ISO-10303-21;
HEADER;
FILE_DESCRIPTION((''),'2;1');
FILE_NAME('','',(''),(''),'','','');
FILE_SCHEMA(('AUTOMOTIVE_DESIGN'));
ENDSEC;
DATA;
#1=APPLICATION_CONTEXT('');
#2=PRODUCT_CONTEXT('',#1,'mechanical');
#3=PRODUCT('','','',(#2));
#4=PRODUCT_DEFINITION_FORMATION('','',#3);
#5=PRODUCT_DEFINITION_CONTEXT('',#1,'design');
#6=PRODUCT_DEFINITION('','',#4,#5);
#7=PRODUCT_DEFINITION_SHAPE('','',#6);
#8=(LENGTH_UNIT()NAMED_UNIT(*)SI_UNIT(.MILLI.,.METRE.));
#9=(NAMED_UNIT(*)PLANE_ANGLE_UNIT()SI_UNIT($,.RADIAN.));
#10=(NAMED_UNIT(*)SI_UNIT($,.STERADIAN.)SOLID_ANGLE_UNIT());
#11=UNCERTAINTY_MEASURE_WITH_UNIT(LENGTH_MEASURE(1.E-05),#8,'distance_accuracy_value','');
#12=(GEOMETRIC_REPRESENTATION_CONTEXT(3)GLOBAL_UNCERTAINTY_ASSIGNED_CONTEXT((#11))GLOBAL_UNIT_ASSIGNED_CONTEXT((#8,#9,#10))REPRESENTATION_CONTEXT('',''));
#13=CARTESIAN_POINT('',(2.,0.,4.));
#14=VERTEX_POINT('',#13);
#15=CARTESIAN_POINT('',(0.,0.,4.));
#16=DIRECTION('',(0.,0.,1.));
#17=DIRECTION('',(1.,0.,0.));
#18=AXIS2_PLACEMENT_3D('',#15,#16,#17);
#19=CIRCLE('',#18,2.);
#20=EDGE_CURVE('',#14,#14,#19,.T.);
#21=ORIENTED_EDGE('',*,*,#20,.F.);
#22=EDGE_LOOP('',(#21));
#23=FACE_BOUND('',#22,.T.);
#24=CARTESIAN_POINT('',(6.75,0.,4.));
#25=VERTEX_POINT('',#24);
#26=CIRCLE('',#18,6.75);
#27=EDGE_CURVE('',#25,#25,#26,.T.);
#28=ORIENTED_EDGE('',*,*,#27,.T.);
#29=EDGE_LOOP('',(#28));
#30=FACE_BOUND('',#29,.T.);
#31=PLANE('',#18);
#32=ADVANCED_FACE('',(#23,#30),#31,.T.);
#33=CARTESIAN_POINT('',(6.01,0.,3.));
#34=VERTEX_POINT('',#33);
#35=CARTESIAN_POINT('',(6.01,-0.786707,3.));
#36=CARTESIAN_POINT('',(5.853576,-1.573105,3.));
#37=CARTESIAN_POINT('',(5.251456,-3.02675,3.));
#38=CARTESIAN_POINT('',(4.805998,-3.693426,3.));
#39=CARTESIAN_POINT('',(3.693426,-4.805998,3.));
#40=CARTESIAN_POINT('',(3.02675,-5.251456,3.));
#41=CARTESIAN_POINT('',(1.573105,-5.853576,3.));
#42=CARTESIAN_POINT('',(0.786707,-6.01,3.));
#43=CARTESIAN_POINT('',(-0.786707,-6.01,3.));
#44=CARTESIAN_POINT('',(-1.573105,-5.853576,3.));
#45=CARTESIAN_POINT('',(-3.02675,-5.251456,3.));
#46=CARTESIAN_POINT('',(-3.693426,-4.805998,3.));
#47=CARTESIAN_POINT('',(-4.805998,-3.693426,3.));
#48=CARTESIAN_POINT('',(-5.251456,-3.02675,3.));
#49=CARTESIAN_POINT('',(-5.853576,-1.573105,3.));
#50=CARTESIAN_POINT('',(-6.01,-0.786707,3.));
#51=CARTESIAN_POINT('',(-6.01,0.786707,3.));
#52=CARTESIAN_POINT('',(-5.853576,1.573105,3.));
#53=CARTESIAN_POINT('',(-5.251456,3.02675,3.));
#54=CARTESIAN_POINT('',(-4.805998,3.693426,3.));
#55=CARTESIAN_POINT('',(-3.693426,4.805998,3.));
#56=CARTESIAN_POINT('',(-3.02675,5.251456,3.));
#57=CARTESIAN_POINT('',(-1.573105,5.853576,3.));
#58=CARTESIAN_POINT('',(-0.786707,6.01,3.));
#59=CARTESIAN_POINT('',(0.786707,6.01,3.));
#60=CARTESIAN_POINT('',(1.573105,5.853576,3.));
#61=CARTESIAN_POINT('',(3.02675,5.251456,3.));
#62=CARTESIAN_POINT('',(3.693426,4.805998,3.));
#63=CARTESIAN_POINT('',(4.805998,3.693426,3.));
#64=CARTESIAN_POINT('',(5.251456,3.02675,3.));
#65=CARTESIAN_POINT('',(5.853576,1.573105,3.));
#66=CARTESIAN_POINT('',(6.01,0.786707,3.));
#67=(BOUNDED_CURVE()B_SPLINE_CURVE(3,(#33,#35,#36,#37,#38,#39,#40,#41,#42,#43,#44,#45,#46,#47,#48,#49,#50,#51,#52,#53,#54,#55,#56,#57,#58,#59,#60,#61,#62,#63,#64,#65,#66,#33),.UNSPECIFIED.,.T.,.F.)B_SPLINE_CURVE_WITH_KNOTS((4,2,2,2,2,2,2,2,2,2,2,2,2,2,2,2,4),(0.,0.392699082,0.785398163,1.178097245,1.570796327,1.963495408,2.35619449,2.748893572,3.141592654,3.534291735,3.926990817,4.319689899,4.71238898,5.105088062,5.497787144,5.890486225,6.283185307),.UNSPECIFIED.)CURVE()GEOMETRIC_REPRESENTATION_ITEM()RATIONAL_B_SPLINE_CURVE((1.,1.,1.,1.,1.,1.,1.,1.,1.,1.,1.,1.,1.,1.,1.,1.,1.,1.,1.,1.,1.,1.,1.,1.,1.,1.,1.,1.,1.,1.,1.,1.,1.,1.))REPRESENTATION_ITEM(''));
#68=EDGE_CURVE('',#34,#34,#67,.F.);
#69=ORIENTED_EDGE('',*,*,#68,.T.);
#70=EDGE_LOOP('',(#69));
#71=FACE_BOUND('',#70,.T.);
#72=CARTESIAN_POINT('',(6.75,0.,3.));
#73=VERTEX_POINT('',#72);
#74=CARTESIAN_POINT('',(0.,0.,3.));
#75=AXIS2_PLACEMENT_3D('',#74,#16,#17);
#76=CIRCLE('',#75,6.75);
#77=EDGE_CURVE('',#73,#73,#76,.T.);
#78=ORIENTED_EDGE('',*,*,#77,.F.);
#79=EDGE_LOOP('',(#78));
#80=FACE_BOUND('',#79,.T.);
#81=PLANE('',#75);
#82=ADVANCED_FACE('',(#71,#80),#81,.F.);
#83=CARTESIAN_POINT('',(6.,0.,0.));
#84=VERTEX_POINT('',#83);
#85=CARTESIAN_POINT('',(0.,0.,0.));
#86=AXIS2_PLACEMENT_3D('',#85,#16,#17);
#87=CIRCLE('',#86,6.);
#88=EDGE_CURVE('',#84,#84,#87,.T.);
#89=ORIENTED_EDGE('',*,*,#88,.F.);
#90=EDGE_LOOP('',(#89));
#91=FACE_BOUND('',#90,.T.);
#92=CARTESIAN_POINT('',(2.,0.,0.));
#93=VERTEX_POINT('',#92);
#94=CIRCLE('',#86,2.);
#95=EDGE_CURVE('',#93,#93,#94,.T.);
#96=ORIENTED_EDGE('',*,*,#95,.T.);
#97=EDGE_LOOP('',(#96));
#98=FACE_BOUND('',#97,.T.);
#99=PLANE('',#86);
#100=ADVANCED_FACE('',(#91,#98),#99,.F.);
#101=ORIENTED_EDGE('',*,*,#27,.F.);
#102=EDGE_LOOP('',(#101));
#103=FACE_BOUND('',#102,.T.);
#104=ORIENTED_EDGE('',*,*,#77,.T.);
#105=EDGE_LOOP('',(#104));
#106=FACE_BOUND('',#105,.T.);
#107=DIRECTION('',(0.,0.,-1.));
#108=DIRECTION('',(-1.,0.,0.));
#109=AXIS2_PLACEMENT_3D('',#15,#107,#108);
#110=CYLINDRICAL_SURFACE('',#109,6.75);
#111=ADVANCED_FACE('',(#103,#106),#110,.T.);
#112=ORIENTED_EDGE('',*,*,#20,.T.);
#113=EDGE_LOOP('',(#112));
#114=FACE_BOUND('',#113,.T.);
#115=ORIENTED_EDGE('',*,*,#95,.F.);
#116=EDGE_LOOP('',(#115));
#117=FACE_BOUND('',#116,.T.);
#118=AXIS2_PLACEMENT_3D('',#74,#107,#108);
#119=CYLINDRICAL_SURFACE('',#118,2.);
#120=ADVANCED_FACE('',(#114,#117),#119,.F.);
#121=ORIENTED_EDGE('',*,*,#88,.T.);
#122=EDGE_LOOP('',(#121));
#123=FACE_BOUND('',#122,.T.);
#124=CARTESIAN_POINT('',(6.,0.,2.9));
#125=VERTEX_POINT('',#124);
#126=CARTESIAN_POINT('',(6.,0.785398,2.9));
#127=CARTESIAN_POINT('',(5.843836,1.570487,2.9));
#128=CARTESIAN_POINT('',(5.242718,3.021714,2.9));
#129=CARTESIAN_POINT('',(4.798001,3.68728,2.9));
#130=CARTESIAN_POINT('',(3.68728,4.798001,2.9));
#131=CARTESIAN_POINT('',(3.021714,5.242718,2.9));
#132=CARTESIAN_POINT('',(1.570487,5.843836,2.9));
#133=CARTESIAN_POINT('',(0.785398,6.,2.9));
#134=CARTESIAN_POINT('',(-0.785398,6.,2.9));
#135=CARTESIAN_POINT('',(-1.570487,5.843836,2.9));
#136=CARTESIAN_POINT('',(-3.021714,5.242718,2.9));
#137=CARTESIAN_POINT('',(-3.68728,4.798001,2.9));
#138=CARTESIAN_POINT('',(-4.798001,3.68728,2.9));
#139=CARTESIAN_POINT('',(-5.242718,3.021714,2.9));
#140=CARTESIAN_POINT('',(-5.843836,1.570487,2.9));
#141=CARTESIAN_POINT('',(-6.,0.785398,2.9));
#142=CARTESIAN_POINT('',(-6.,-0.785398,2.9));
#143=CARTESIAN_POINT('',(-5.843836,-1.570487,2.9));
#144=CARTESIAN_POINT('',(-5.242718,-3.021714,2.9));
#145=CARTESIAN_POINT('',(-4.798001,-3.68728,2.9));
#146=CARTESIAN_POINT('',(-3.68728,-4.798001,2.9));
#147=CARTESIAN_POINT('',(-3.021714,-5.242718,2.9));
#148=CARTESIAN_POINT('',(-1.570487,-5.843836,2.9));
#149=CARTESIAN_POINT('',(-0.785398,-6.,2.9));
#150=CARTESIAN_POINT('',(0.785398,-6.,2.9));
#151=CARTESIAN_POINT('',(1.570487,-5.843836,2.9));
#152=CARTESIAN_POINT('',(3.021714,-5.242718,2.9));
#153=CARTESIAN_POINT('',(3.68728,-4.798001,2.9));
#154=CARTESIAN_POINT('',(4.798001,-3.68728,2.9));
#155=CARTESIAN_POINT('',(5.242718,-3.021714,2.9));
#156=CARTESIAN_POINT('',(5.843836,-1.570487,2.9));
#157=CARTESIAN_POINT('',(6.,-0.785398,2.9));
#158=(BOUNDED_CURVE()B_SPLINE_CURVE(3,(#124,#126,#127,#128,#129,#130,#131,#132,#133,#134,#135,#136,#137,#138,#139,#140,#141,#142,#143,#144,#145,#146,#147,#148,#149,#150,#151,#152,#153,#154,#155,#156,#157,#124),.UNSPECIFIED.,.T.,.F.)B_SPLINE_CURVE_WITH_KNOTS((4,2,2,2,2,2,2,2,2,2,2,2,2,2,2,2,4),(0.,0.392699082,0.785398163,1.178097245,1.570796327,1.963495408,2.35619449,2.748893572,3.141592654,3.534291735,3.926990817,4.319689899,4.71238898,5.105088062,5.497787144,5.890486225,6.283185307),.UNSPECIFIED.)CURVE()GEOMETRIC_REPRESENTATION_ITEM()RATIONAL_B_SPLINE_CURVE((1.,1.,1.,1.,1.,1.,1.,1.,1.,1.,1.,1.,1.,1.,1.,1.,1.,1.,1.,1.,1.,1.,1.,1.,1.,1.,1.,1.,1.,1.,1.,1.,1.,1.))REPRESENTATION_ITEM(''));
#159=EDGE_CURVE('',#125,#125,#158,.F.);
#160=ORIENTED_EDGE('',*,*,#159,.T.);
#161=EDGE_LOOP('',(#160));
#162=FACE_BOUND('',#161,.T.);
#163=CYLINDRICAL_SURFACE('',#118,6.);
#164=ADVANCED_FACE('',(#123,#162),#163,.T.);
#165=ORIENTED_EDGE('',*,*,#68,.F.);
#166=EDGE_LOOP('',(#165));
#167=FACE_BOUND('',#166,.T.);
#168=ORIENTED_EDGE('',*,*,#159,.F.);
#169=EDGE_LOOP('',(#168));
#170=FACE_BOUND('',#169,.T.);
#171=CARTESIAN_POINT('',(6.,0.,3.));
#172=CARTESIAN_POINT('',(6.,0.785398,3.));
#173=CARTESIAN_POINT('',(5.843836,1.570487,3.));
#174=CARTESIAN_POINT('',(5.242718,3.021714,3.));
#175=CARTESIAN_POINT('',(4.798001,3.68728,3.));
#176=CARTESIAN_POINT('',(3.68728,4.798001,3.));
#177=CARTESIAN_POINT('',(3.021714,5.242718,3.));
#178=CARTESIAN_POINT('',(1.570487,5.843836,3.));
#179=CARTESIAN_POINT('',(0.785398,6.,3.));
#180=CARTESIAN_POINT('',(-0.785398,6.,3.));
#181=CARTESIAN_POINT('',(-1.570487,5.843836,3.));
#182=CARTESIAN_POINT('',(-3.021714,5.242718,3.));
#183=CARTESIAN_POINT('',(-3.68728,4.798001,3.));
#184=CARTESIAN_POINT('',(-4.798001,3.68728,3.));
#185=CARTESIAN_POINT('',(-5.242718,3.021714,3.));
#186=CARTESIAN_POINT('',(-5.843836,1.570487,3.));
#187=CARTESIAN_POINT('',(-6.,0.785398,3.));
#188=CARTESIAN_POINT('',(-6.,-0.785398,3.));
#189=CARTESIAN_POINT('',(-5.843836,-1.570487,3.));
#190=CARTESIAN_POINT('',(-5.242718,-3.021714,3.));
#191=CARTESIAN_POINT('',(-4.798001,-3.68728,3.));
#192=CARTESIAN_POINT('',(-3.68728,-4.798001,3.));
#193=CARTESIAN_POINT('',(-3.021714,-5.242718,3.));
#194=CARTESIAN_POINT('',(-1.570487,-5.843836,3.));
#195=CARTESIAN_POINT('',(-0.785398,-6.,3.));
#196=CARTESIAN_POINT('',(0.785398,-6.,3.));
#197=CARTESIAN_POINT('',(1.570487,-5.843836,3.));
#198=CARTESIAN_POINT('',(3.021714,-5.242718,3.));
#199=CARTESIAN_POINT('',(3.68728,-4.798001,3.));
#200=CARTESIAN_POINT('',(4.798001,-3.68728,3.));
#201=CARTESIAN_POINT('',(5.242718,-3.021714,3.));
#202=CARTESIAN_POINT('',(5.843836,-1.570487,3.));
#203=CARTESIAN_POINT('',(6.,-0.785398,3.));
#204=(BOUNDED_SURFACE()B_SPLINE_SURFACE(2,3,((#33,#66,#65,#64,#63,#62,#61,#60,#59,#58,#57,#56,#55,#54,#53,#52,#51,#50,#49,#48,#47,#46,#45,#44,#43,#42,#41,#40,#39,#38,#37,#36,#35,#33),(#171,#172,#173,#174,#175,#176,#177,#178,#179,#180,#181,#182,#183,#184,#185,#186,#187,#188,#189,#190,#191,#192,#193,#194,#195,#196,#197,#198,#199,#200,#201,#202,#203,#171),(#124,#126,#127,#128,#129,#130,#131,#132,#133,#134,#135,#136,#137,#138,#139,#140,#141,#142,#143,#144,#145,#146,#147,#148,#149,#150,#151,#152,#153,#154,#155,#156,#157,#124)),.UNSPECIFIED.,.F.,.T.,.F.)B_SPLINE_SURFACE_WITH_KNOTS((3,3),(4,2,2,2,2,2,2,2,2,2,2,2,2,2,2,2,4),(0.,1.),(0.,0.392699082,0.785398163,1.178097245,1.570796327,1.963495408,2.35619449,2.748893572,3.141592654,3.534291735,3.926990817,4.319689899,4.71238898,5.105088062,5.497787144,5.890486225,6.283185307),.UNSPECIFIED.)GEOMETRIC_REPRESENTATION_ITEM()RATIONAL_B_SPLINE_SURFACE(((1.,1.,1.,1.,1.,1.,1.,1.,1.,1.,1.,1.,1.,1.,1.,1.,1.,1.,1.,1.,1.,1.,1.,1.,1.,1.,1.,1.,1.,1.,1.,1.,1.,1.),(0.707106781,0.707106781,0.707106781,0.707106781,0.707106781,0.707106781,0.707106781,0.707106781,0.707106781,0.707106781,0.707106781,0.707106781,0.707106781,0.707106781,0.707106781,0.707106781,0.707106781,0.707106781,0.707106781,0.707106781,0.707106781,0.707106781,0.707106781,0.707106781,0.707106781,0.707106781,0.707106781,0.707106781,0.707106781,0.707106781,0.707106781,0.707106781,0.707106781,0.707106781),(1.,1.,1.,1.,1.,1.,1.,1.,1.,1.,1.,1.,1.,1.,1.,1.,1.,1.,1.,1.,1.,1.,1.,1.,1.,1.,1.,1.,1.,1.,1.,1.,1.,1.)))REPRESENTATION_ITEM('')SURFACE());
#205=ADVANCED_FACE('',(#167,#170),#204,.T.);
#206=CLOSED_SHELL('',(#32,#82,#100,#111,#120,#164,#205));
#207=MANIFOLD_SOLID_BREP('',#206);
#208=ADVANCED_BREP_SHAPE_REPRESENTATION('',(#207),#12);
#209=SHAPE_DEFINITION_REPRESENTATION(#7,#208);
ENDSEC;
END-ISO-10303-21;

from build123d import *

# Parameters (mm, degrees)
SKETCH1_R           = 6
SKETCH1_R_2         = 2
BOSS_EXTRUDE1_DEPTH = 3
SKETCH2_R           = 6.75
SKETCH2_R_2         = 2
BOSS_EXTRUDE2_DEPTH = 1
FILLET1_SIZE        = 0.1
FILLET1_SIZE_2      = 0.01


with BuildPart() as part:
    # Sketch1 → Boss-Extrude1 (new body)
    with BuildSketch(Plane.XY):
        Circle(SKETCH1_R)
        Circle(SKETCH1_R_2, mode=Mode.SUBTRACT)
    extrude(amount=BOSS_EXTRUDE1_DEPTH)

    # Sketch2 → Boss-Extrude2 (add)
    with BuildSketch(Plane.XY.offset(3)):
        Circle(SKETCH2_R)
        Circle(SKETCH2_R_2, mode=Mode.SUBTRACT)
    extrude(amount=BOSS_EXTRUDE2_DEPTH)

    # Fillet1
    # an asymmetric fillet: 0.1, 0.01 mm, written as the material it adds along each edge
    with BuildSketch(Plane(origin=(0, 0, 3), x_dir=(1, 0, 0), z_dir=(0, -1, 0))) as fillet1_piece_1:
        with BuildLine():
            Bezier((6, -FILLET1_SIZE), (6, 0), (6 + FILLET1_SIZE_2, 0), weights=[1, 0.707106781, 1])
            Line((6 + FILLET1_SIZE_2, 0), (6, 0))
            Line((6, 0), (6, -FILLET1_SIZE))
        make_face()
    revolve(axis=Axis((0, 0, 3), (0, 0, 1)))


solid = part.part
